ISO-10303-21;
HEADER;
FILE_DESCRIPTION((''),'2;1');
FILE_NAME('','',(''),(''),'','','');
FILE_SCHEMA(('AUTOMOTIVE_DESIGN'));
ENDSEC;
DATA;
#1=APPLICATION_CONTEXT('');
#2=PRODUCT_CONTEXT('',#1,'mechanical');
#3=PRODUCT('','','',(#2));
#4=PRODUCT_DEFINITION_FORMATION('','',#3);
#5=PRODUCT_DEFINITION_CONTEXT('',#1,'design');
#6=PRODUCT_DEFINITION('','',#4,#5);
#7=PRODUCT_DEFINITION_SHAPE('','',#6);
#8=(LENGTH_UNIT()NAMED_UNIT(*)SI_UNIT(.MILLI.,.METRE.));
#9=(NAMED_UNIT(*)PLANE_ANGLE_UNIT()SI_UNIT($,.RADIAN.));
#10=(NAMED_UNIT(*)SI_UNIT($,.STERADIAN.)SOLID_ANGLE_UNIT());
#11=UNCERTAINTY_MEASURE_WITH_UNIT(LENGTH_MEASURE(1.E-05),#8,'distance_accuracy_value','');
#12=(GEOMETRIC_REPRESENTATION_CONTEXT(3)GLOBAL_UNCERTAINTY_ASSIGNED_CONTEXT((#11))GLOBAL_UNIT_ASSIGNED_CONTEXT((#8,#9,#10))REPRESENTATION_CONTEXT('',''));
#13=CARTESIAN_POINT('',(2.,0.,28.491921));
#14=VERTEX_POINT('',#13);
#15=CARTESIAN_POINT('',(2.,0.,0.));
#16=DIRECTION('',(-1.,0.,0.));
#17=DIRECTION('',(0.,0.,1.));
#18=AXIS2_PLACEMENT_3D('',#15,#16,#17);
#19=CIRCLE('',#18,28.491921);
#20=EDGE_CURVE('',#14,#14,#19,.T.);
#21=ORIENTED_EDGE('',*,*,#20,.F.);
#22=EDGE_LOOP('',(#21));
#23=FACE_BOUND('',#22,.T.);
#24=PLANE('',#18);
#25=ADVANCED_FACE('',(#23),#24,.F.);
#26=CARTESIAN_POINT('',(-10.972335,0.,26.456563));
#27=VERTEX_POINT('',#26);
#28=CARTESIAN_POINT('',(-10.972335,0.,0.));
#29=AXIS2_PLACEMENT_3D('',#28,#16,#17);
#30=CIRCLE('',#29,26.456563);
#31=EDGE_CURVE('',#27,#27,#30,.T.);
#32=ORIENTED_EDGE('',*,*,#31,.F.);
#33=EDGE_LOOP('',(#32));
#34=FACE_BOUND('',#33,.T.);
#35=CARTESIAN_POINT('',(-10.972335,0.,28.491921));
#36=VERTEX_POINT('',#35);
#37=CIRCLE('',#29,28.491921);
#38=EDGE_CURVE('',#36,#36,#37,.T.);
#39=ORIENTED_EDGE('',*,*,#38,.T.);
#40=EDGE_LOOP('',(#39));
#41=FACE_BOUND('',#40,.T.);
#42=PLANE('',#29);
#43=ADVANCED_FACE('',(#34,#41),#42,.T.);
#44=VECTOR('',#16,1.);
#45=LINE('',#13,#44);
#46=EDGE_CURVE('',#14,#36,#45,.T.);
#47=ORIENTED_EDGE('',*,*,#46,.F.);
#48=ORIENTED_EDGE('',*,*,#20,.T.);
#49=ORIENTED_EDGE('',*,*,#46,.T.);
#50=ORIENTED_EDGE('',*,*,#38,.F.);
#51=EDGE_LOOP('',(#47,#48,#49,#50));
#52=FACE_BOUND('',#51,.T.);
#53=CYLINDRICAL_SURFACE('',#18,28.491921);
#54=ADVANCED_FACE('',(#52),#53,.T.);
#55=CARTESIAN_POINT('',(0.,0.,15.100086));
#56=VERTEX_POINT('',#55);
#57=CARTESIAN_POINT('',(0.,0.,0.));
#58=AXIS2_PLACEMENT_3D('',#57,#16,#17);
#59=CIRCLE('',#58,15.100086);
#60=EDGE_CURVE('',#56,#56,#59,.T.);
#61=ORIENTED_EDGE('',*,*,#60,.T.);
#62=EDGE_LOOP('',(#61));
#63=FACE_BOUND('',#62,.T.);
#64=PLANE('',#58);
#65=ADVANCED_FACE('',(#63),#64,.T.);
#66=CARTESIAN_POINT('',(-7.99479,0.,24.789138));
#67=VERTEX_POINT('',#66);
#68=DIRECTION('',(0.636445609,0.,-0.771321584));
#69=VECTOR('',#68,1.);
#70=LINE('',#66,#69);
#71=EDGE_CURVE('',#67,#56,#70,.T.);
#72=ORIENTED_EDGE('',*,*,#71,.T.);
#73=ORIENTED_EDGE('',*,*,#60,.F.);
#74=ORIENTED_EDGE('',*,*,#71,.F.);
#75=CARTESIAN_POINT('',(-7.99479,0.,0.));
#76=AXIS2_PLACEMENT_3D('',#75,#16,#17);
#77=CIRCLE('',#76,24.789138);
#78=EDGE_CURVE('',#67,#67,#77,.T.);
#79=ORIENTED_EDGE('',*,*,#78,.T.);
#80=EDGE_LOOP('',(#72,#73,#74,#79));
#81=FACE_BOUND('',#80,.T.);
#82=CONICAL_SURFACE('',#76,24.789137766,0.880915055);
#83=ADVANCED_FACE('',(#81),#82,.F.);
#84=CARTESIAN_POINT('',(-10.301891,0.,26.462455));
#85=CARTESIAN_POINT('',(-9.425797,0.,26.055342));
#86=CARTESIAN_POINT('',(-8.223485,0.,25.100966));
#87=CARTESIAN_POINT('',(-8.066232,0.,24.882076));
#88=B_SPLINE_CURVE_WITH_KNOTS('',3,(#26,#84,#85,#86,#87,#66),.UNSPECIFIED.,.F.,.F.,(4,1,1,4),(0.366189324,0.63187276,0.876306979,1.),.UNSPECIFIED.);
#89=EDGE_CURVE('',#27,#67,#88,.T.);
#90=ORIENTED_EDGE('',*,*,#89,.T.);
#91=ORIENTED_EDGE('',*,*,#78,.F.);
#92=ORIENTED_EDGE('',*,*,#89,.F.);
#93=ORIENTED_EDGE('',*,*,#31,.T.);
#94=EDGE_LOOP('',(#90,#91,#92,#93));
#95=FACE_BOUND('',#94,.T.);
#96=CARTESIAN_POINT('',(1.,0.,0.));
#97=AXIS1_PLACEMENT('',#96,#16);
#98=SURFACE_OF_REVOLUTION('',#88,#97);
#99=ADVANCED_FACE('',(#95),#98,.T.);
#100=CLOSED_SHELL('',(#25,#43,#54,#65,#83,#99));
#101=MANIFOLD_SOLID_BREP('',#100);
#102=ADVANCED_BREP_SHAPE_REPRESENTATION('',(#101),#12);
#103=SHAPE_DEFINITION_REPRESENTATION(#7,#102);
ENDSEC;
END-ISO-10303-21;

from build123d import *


with BuildPart() as f1:
    # F0 (on Front) → F1 (revolve)
    with BuildSketch(Plane.XZ):
        with BuildLine():
            add(Edge.make_bspline(
                [(-10.9723351412, 26.4565628022), (-10.3018910534, 26.4624551956), (-9.4257966097, 26.0553417029), (-8.2234851438, 25.1009661647), (-8.0662317018, 24.8820760133), (-7.9947902337, 24.7891377658)],
                knots=[0.3661893236, 0.3661893236, 0.3661893236, 0.3661893236, 0.63187276, 0.8763069792, 1, 1, 1, 1], degree=3))
            Line((-7.9947902337, 24.7891377658), (0, 15.100086289))
            Line((0, 15.100086289), (0, 0))
            Line((0, 0), (2, 0))
            Line((2, 0), (2, 28.4919212472))
            Line((2, 28.4919212472), (0, 28.4919212472))
            Line((0, 28.4919212472), (-10.9723351412, 28.4919212472))
            Line((-10.9723351412, 28.4919212472), (-10.9723351412, 26.4565628022))
        make_face()
    revolve(axis=Axis((1, 0, 0), (-1, 0, 0)))


solid = f1.part
